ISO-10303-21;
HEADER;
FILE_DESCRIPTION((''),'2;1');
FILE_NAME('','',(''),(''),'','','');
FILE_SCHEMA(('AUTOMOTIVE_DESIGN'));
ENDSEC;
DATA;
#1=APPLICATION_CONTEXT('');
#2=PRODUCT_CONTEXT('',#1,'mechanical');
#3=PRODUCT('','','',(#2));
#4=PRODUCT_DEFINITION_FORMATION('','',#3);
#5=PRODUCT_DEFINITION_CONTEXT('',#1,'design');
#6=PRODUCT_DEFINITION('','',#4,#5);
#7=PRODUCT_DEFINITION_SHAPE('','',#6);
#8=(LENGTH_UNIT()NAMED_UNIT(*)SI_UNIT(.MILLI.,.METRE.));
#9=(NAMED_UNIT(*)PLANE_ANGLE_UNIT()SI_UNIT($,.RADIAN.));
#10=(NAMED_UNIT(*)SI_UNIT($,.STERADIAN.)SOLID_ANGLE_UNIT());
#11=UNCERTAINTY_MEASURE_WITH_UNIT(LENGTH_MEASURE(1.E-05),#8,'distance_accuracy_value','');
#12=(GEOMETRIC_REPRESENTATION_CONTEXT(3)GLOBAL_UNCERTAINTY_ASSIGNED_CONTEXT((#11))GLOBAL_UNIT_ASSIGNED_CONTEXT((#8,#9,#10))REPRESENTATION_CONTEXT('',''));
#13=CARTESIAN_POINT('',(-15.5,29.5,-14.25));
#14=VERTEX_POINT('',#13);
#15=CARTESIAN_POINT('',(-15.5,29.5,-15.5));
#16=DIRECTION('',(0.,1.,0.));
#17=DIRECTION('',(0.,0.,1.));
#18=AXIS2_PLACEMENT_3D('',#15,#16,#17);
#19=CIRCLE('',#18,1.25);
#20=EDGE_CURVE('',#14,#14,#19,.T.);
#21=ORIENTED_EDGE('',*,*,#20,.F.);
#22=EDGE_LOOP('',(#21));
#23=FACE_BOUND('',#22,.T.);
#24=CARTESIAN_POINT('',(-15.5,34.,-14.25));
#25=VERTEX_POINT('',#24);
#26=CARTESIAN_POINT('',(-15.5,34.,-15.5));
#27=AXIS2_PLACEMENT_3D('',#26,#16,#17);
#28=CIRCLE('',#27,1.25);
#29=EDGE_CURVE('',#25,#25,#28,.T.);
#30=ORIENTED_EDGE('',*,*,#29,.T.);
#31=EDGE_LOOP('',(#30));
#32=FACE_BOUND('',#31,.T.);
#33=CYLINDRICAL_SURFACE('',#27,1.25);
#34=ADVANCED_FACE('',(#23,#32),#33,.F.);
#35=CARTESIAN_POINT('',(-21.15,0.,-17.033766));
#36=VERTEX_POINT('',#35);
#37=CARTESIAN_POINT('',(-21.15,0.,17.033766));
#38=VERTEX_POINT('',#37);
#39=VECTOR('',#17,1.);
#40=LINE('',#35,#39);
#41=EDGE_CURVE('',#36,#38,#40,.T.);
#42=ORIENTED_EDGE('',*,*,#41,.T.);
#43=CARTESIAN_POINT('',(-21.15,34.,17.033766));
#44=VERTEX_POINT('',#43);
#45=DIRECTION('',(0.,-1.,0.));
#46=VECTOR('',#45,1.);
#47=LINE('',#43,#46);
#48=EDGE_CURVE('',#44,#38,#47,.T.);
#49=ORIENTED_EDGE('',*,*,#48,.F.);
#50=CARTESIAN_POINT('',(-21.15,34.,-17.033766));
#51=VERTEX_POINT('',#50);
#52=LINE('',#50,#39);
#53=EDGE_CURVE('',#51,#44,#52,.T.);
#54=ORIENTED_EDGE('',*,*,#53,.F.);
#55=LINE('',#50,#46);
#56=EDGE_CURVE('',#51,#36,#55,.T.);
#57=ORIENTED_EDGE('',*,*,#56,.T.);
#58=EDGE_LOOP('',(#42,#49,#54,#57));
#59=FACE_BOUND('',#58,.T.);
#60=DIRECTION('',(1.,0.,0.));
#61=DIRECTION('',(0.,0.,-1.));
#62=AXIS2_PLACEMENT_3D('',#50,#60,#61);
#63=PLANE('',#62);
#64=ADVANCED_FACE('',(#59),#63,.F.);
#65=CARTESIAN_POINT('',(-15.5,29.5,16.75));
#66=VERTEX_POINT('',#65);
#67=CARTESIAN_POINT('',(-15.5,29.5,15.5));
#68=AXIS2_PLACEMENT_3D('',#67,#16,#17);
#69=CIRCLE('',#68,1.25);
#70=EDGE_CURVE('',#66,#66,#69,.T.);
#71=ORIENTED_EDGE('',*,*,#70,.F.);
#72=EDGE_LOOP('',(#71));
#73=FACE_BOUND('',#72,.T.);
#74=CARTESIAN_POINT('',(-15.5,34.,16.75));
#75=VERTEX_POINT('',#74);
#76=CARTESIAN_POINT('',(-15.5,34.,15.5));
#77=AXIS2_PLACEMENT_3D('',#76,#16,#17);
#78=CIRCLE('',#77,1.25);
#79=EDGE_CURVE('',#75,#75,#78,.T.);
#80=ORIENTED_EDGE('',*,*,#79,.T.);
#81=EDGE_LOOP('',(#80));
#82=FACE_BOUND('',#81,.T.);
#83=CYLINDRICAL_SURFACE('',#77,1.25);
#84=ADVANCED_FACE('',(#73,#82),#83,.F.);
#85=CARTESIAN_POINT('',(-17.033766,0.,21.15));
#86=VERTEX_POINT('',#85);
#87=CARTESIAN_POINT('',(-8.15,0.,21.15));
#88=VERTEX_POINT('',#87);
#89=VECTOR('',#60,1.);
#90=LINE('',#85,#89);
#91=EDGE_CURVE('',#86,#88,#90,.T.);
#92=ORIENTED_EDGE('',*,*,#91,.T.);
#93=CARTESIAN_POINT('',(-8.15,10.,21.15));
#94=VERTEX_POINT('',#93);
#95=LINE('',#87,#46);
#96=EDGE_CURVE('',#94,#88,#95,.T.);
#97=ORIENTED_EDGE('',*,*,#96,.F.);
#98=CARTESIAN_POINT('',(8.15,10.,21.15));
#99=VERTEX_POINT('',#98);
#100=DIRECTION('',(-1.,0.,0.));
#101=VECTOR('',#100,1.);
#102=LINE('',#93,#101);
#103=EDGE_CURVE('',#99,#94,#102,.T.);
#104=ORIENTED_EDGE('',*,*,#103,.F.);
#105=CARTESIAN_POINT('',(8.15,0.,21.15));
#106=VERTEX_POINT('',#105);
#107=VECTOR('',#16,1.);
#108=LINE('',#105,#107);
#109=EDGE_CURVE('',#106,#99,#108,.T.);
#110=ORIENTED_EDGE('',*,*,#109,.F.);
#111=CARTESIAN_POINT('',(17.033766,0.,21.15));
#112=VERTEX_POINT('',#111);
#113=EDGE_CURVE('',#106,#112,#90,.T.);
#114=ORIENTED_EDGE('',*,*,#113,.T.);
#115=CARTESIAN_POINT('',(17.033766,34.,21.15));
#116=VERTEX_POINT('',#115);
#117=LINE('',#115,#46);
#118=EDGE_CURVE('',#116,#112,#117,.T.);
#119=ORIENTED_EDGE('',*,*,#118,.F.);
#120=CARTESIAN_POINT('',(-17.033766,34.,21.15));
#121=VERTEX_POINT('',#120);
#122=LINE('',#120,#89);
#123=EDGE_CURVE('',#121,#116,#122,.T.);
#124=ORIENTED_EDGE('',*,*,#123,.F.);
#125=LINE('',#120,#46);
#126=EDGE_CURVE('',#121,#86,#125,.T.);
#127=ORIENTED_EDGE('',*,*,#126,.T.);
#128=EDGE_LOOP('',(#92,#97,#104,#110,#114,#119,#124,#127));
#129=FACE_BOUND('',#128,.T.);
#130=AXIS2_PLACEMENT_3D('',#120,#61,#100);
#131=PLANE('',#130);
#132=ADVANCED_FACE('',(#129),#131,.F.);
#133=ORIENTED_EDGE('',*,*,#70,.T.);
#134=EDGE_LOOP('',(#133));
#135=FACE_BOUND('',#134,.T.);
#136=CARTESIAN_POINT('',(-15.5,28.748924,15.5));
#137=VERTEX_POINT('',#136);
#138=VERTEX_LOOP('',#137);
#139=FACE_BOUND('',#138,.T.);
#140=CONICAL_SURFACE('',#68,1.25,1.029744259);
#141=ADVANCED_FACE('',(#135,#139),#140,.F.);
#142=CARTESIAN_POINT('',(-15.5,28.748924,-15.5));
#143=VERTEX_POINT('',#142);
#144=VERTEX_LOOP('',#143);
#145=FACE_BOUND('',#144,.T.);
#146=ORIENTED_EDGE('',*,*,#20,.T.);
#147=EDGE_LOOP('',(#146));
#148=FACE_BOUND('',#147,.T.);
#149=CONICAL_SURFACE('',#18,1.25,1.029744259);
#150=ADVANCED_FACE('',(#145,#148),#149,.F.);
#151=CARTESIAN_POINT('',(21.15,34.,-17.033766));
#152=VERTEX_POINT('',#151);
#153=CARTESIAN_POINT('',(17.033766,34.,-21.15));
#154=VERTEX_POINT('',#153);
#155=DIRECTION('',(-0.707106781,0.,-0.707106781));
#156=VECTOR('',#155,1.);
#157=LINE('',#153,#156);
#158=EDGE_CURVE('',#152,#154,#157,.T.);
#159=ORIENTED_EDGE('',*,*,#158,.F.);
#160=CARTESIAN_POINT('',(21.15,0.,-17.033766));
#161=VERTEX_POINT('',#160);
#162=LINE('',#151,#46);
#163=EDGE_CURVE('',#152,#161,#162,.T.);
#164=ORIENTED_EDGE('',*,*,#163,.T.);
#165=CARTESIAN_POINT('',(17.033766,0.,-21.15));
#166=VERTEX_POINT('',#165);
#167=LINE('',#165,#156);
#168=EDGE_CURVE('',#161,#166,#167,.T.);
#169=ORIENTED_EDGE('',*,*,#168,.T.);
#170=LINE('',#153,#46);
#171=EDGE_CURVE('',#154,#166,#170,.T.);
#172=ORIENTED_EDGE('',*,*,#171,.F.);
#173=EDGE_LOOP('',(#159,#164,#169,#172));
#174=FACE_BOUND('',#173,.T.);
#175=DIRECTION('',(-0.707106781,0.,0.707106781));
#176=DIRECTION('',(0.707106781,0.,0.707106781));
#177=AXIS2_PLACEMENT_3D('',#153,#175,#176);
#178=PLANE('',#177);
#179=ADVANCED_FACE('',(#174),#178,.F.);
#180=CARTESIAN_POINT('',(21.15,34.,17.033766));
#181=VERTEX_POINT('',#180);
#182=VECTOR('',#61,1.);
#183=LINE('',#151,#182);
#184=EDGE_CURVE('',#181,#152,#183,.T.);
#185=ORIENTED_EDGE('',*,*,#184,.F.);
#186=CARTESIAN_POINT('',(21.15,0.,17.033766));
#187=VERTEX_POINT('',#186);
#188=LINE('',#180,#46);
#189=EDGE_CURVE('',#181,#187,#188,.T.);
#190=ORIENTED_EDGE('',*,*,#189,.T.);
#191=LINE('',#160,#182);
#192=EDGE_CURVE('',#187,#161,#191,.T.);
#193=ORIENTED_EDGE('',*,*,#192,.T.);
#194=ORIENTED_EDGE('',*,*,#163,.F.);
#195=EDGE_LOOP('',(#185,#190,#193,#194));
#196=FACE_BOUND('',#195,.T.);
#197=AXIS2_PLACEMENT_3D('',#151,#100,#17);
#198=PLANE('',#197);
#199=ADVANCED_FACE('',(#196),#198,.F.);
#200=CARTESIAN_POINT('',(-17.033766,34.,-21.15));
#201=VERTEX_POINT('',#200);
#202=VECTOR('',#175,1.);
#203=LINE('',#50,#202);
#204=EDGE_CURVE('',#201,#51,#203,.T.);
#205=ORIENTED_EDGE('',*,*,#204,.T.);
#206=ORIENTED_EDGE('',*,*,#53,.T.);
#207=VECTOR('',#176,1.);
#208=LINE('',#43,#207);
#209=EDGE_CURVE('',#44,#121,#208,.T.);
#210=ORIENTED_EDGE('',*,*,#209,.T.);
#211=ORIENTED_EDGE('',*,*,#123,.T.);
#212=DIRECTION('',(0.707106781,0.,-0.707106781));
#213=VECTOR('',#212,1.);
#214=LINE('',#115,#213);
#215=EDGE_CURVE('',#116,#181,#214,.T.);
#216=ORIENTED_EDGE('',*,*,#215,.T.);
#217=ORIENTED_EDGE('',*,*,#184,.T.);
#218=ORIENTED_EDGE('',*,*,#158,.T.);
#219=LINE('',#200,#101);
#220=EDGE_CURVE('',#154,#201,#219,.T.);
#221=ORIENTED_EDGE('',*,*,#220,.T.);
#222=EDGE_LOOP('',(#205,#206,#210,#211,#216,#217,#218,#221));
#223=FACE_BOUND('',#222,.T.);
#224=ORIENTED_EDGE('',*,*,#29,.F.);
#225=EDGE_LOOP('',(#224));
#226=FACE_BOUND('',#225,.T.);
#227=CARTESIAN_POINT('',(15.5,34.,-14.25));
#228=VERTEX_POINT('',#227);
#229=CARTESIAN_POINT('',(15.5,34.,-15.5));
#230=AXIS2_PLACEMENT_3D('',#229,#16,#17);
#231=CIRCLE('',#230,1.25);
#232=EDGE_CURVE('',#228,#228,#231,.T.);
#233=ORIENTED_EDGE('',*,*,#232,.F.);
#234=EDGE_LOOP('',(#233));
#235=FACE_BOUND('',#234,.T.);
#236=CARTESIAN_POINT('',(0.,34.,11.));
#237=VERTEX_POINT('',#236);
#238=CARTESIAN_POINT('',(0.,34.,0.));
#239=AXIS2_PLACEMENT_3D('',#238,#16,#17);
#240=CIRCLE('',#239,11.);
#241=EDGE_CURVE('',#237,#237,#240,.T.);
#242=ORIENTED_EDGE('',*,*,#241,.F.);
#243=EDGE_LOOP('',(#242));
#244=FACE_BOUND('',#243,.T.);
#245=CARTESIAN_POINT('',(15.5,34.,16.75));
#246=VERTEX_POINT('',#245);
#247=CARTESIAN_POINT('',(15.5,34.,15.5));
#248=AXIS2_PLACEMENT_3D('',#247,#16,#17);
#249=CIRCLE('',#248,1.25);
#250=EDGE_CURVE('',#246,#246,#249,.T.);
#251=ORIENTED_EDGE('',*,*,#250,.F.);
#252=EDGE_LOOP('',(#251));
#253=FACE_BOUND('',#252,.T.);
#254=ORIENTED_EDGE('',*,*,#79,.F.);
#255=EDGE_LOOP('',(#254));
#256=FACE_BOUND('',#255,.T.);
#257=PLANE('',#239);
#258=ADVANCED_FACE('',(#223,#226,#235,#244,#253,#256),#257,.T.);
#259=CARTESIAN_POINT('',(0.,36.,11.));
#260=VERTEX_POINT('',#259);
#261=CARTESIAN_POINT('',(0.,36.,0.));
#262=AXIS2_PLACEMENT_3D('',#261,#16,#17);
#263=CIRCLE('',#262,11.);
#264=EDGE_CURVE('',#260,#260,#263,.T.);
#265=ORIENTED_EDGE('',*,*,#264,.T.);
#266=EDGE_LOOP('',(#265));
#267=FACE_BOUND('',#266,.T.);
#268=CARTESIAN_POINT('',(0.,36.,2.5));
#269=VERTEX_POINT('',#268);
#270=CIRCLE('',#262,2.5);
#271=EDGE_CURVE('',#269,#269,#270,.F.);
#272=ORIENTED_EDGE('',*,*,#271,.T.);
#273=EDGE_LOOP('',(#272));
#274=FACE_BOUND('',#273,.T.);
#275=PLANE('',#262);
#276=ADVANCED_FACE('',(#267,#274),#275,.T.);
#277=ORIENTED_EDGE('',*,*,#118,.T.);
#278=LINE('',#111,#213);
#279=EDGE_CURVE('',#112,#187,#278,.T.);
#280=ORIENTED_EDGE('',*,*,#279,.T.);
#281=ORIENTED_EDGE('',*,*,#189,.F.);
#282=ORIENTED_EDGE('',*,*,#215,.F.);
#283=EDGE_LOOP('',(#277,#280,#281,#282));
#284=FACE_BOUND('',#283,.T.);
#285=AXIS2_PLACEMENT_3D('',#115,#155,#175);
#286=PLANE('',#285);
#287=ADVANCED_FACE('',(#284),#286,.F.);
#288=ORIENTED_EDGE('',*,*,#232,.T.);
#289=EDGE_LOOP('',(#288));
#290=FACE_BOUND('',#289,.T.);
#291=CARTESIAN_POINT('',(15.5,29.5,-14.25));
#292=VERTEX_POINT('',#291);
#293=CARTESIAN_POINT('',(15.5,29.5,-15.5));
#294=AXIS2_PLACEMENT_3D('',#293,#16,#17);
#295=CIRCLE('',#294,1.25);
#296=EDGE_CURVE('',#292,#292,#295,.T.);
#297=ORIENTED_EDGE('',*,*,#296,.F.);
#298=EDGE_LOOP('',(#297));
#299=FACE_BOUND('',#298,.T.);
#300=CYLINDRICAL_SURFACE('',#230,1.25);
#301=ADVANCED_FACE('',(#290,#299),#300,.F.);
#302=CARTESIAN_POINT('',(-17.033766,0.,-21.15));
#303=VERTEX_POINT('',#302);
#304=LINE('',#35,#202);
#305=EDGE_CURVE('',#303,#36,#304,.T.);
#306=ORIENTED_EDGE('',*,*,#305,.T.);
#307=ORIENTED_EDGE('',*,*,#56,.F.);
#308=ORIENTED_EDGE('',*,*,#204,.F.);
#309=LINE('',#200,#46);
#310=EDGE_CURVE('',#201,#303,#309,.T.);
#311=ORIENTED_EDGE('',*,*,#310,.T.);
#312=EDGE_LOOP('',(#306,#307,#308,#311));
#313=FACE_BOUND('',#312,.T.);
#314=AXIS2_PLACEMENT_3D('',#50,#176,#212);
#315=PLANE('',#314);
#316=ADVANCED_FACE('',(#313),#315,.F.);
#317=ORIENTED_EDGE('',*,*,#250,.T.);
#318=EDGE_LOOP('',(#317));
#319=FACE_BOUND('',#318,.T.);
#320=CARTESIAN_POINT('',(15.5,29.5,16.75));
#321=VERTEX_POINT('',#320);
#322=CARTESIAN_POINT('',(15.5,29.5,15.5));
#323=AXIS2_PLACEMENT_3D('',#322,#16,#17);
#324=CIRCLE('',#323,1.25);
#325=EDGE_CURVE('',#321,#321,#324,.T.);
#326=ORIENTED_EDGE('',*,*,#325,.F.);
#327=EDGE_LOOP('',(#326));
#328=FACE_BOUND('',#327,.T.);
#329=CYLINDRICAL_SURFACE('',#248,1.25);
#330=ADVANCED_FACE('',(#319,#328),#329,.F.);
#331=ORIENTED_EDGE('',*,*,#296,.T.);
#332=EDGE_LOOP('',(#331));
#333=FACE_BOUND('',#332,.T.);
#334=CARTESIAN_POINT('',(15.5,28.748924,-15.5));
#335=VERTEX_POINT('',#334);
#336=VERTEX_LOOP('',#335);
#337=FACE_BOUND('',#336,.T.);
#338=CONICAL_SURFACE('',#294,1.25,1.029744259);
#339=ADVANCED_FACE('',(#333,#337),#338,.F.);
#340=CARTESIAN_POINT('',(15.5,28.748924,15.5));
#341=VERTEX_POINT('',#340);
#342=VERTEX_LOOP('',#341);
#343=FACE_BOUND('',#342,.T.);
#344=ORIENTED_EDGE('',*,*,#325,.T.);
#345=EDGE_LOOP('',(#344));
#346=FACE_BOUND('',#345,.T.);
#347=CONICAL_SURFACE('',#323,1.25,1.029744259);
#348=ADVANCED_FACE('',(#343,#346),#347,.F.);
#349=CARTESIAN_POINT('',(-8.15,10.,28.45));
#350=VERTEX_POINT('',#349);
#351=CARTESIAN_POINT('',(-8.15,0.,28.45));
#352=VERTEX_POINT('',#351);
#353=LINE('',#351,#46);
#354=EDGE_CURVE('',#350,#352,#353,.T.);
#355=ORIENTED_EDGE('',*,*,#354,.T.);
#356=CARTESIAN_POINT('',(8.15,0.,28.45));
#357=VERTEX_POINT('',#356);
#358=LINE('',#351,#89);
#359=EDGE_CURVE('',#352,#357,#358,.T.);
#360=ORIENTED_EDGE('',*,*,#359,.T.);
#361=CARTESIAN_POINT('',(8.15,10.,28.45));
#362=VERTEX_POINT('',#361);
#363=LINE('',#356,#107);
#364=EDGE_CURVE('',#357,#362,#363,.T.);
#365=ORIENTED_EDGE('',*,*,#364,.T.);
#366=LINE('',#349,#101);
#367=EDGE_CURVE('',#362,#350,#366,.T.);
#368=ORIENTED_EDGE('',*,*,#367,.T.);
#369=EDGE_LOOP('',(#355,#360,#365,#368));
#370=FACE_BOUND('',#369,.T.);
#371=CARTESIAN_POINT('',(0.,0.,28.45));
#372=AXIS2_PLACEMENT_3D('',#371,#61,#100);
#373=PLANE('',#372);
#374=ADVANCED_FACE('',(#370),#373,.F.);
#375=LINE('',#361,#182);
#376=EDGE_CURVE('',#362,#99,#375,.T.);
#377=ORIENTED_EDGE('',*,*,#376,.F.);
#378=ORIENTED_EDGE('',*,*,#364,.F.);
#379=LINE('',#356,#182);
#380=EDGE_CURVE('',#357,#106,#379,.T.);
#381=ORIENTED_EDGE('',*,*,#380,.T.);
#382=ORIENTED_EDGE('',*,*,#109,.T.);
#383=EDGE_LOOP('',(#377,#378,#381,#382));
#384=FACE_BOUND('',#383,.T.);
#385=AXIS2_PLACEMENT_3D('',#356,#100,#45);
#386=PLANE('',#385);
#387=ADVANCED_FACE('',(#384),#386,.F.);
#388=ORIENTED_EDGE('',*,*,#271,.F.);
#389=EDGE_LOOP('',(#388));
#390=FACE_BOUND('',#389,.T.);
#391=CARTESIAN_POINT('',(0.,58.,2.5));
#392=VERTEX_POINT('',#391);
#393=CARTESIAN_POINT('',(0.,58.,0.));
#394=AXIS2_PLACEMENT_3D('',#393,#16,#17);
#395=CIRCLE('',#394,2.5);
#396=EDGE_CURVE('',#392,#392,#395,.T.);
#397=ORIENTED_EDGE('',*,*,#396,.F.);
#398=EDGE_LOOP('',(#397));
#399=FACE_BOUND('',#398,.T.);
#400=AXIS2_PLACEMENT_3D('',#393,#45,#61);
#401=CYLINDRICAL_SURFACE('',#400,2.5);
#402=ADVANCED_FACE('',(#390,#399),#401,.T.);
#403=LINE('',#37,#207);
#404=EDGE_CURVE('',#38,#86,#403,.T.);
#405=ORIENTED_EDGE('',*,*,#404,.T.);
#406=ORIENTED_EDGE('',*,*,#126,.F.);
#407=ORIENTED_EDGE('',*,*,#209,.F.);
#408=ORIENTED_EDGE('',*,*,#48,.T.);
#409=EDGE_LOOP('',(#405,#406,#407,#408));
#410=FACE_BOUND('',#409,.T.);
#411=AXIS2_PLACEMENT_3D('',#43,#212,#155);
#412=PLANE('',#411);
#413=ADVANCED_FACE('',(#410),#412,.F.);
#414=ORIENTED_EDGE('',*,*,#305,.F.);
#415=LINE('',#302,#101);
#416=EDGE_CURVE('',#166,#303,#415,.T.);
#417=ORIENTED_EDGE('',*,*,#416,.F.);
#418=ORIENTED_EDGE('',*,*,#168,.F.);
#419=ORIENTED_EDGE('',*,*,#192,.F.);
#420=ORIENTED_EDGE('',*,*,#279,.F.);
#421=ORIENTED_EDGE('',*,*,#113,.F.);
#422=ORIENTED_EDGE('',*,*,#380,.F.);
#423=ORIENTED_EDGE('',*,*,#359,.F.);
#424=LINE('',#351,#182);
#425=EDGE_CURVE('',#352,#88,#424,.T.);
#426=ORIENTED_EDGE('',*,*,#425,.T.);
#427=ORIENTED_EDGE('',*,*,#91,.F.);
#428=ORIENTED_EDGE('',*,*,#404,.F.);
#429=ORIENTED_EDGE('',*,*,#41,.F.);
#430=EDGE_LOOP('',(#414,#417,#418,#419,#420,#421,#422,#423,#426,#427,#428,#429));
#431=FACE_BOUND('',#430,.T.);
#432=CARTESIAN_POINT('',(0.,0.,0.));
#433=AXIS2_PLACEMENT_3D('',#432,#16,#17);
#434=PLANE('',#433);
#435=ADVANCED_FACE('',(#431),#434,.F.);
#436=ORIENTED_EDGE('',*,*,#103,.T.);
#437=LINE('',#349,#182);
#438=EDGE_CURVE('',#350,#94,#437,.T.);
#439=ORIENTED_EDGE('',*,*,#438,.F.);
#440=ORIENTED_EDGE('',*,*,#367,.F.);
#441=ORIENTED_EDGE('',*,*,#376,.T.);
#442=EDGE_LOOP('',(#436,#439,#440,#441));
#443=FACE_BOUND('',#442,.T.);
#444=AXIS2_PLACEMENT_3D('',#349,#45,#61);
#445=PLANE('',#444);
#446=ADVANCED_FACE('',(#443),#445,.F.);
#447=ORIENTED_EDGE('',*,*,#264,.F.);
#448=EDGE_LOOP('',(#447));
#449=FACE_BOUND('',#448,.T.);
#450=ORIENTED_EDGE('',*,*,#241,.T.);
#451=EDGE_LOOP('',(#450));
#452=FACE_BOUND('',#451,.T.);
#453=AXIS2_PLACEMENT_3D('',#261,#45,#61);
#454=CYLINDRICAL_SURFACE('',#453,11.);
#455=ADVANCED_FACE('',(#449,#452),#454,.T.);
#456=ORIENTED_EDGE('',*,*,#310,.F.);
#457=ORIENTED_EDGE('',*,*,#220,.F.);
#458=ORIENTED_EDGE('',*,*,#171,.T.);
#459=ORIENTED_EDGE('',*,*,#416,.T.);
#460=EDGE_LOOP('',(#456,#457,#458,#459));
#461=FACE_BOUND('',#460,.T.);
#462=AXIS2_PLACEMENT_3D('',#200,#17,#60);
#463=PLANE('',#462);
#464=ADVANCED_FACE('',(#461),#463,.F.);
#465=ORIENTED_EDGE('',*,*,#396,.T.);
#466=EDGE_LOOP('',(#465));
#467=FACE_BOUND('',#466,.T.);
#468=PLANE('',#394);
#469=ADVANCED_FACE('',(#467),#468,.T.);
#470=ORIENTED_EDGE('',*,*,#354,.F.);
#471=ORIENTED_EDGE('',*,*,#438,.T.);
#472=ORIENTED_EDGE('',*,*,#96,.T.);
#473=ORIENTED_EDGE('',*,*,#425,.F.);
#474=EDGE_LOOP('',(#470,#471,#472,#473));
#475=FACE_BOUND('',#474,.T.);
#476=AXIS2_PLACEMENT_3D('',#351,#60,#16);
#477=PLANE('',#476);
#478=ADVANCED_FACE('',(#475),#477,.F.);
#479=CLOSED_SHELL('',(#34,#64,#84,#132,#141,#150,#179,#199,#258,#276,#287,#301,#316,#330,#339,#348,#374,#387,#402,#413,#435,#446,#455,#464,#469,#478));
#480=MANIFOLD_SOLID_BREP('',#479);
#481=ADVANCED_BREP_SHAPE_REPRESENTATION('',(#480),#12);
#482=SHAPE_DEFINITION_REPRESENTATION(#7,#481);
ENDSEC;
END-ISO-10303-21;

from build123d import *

# Parameters (mm, degrees)
BOSS_EXTRUDE1_DEPTH = 34
SKETCH2_R           = 11
BOSS_EXTRUDE2_DEPTH = 2
SKETCH3_R           = 2.5
BOSS_EXTRUDE3_DEPTH = 24
SKETCH8_W           = 16.3
SKETCH8_H           = 10
BOSS_EXTRUDE4_DEPTH = 7.3


# Read off the part's stored shape, not the designer's step: M3 Tapped Hole1
with BuildPart() as part:
    # Sketch1 → Boss-Extrude1 (new body)
    with BuildSketch(Plane(origin=(0, 0, 0), x_dir=(1, 0, 0), z_dir=(0, 1, 0))):
        Polygon((-17.033766184, 21.15), (17.033766184, 21.15), (21.15, 17.033766184), (21.15, -17.033766184), (17.033766184, -21.15), (-17.033766184, -21.15), (-21.15, -17.033766184), (-21.15, 17.033766184), align=None)
    extrude(amount=BOSS_EXTRUDE1_DEPTH)

    # Sketch2 → Boss-Extrude2 (add)
    with BuildSketch(Plane(origin=(0, 34, 0), x_dir=(1, 0, 0), z_dir=(0, 1, 0))):
        with Locations(Location((0, 0, 0), (0, 0, 270))):
            Circle(SKETCH2_R)
    extrude(amount=BOSS_EXTRUDE2_DEPTH)

    # Sketch3 → Boss-Extrude3 (add)
    with BuildSketch(Plane(origin=(0, 34, 0), x_dir=(1, 0, 0), z_dir=(0, 1, 0))):
        with Locations(Location((0, 0, 0), (0, 0, 270))):
            Circle(SKETCH3_R)
    extrude(amount=BOSS_EXTRUDE3_DEPTH)

    # M3 Tapped Hole1 outline → M3 Tapped Hole1 (revolve, cut)
    with BuildSketch(Plane(origin=(15.5, 0, -15.5), x_dir=(1, 0, 0), z_dir=(0, 0, 1))):
        Polygon((0, 34), (0, 28.748924226), (1.25, 29.5), (1.25, 34), align=None)
    revolve(axis=Axis((15.5, 0, -15.5), (0, 1, 0)), mode=Mode.SUBTRACT)

    # M3 Tapped Hole1 2 outline → M3 Tapped Hole1 2 (revolve, cut)
    with BuildSketch(Plane(origin=(-15.5, 0, 15.5), x_dir=(1, 0, 0), z_dir=(0, 0, 1))):
        Polygon((0, 34), (0, 28.748924226), (1.25, 29.5), (1.25, 34), align=None)
    revolve(axis=Axis((-15.5, 0, 15.5), (0, 1, 0)), mode=Mode.SUBTRACT)

    # M3 Tapped Hole1 3 outline → M3 Tapped Hole1 3 (revolve, cut)
    with BuildSketch(Plane(origin=(15.5, 0, 15.5), x_dir=(1, 0, 0), z_dir=(0, 0, 1))):
        Polygon((0, 34), (0, 28.748924226), (1.25, 29.5), (1.25, 34), align=None)
    revolve(axis=Axis((15.5, 0, 15.5), (0, 1, 0)), mode=Mode.SUBTRACT)

    # M3 Tapped Hole1 4 outline → M3 Tapped Hole1 4 (revolve, cut)
    with BuildSketch(Plane(origin=(-15.5, 0, -15.5), x_dir=(1, 0, 0), z_dir=(0, 0, 1))):
        Polygon((0, 34), (0, 28.748924226), (1.25, 29.5), (1.25, 34), align=None)
    revolve(axis=Axis((-15.5, 0, -15.5), (0, 1, 0)), mode=Mode.SUBTRACT)

    # Sketch8 → Boss-Extrude4 (add)
    with BuildSketch(Plane.XY.offset(21.15)):
        with Locations((0, 5)):
            Rectangle(SKETCH8_W, SKETCH8_H)
    extrude(amount=BOSS_EXTRUDE4_DEPTH)


solid = part.part
